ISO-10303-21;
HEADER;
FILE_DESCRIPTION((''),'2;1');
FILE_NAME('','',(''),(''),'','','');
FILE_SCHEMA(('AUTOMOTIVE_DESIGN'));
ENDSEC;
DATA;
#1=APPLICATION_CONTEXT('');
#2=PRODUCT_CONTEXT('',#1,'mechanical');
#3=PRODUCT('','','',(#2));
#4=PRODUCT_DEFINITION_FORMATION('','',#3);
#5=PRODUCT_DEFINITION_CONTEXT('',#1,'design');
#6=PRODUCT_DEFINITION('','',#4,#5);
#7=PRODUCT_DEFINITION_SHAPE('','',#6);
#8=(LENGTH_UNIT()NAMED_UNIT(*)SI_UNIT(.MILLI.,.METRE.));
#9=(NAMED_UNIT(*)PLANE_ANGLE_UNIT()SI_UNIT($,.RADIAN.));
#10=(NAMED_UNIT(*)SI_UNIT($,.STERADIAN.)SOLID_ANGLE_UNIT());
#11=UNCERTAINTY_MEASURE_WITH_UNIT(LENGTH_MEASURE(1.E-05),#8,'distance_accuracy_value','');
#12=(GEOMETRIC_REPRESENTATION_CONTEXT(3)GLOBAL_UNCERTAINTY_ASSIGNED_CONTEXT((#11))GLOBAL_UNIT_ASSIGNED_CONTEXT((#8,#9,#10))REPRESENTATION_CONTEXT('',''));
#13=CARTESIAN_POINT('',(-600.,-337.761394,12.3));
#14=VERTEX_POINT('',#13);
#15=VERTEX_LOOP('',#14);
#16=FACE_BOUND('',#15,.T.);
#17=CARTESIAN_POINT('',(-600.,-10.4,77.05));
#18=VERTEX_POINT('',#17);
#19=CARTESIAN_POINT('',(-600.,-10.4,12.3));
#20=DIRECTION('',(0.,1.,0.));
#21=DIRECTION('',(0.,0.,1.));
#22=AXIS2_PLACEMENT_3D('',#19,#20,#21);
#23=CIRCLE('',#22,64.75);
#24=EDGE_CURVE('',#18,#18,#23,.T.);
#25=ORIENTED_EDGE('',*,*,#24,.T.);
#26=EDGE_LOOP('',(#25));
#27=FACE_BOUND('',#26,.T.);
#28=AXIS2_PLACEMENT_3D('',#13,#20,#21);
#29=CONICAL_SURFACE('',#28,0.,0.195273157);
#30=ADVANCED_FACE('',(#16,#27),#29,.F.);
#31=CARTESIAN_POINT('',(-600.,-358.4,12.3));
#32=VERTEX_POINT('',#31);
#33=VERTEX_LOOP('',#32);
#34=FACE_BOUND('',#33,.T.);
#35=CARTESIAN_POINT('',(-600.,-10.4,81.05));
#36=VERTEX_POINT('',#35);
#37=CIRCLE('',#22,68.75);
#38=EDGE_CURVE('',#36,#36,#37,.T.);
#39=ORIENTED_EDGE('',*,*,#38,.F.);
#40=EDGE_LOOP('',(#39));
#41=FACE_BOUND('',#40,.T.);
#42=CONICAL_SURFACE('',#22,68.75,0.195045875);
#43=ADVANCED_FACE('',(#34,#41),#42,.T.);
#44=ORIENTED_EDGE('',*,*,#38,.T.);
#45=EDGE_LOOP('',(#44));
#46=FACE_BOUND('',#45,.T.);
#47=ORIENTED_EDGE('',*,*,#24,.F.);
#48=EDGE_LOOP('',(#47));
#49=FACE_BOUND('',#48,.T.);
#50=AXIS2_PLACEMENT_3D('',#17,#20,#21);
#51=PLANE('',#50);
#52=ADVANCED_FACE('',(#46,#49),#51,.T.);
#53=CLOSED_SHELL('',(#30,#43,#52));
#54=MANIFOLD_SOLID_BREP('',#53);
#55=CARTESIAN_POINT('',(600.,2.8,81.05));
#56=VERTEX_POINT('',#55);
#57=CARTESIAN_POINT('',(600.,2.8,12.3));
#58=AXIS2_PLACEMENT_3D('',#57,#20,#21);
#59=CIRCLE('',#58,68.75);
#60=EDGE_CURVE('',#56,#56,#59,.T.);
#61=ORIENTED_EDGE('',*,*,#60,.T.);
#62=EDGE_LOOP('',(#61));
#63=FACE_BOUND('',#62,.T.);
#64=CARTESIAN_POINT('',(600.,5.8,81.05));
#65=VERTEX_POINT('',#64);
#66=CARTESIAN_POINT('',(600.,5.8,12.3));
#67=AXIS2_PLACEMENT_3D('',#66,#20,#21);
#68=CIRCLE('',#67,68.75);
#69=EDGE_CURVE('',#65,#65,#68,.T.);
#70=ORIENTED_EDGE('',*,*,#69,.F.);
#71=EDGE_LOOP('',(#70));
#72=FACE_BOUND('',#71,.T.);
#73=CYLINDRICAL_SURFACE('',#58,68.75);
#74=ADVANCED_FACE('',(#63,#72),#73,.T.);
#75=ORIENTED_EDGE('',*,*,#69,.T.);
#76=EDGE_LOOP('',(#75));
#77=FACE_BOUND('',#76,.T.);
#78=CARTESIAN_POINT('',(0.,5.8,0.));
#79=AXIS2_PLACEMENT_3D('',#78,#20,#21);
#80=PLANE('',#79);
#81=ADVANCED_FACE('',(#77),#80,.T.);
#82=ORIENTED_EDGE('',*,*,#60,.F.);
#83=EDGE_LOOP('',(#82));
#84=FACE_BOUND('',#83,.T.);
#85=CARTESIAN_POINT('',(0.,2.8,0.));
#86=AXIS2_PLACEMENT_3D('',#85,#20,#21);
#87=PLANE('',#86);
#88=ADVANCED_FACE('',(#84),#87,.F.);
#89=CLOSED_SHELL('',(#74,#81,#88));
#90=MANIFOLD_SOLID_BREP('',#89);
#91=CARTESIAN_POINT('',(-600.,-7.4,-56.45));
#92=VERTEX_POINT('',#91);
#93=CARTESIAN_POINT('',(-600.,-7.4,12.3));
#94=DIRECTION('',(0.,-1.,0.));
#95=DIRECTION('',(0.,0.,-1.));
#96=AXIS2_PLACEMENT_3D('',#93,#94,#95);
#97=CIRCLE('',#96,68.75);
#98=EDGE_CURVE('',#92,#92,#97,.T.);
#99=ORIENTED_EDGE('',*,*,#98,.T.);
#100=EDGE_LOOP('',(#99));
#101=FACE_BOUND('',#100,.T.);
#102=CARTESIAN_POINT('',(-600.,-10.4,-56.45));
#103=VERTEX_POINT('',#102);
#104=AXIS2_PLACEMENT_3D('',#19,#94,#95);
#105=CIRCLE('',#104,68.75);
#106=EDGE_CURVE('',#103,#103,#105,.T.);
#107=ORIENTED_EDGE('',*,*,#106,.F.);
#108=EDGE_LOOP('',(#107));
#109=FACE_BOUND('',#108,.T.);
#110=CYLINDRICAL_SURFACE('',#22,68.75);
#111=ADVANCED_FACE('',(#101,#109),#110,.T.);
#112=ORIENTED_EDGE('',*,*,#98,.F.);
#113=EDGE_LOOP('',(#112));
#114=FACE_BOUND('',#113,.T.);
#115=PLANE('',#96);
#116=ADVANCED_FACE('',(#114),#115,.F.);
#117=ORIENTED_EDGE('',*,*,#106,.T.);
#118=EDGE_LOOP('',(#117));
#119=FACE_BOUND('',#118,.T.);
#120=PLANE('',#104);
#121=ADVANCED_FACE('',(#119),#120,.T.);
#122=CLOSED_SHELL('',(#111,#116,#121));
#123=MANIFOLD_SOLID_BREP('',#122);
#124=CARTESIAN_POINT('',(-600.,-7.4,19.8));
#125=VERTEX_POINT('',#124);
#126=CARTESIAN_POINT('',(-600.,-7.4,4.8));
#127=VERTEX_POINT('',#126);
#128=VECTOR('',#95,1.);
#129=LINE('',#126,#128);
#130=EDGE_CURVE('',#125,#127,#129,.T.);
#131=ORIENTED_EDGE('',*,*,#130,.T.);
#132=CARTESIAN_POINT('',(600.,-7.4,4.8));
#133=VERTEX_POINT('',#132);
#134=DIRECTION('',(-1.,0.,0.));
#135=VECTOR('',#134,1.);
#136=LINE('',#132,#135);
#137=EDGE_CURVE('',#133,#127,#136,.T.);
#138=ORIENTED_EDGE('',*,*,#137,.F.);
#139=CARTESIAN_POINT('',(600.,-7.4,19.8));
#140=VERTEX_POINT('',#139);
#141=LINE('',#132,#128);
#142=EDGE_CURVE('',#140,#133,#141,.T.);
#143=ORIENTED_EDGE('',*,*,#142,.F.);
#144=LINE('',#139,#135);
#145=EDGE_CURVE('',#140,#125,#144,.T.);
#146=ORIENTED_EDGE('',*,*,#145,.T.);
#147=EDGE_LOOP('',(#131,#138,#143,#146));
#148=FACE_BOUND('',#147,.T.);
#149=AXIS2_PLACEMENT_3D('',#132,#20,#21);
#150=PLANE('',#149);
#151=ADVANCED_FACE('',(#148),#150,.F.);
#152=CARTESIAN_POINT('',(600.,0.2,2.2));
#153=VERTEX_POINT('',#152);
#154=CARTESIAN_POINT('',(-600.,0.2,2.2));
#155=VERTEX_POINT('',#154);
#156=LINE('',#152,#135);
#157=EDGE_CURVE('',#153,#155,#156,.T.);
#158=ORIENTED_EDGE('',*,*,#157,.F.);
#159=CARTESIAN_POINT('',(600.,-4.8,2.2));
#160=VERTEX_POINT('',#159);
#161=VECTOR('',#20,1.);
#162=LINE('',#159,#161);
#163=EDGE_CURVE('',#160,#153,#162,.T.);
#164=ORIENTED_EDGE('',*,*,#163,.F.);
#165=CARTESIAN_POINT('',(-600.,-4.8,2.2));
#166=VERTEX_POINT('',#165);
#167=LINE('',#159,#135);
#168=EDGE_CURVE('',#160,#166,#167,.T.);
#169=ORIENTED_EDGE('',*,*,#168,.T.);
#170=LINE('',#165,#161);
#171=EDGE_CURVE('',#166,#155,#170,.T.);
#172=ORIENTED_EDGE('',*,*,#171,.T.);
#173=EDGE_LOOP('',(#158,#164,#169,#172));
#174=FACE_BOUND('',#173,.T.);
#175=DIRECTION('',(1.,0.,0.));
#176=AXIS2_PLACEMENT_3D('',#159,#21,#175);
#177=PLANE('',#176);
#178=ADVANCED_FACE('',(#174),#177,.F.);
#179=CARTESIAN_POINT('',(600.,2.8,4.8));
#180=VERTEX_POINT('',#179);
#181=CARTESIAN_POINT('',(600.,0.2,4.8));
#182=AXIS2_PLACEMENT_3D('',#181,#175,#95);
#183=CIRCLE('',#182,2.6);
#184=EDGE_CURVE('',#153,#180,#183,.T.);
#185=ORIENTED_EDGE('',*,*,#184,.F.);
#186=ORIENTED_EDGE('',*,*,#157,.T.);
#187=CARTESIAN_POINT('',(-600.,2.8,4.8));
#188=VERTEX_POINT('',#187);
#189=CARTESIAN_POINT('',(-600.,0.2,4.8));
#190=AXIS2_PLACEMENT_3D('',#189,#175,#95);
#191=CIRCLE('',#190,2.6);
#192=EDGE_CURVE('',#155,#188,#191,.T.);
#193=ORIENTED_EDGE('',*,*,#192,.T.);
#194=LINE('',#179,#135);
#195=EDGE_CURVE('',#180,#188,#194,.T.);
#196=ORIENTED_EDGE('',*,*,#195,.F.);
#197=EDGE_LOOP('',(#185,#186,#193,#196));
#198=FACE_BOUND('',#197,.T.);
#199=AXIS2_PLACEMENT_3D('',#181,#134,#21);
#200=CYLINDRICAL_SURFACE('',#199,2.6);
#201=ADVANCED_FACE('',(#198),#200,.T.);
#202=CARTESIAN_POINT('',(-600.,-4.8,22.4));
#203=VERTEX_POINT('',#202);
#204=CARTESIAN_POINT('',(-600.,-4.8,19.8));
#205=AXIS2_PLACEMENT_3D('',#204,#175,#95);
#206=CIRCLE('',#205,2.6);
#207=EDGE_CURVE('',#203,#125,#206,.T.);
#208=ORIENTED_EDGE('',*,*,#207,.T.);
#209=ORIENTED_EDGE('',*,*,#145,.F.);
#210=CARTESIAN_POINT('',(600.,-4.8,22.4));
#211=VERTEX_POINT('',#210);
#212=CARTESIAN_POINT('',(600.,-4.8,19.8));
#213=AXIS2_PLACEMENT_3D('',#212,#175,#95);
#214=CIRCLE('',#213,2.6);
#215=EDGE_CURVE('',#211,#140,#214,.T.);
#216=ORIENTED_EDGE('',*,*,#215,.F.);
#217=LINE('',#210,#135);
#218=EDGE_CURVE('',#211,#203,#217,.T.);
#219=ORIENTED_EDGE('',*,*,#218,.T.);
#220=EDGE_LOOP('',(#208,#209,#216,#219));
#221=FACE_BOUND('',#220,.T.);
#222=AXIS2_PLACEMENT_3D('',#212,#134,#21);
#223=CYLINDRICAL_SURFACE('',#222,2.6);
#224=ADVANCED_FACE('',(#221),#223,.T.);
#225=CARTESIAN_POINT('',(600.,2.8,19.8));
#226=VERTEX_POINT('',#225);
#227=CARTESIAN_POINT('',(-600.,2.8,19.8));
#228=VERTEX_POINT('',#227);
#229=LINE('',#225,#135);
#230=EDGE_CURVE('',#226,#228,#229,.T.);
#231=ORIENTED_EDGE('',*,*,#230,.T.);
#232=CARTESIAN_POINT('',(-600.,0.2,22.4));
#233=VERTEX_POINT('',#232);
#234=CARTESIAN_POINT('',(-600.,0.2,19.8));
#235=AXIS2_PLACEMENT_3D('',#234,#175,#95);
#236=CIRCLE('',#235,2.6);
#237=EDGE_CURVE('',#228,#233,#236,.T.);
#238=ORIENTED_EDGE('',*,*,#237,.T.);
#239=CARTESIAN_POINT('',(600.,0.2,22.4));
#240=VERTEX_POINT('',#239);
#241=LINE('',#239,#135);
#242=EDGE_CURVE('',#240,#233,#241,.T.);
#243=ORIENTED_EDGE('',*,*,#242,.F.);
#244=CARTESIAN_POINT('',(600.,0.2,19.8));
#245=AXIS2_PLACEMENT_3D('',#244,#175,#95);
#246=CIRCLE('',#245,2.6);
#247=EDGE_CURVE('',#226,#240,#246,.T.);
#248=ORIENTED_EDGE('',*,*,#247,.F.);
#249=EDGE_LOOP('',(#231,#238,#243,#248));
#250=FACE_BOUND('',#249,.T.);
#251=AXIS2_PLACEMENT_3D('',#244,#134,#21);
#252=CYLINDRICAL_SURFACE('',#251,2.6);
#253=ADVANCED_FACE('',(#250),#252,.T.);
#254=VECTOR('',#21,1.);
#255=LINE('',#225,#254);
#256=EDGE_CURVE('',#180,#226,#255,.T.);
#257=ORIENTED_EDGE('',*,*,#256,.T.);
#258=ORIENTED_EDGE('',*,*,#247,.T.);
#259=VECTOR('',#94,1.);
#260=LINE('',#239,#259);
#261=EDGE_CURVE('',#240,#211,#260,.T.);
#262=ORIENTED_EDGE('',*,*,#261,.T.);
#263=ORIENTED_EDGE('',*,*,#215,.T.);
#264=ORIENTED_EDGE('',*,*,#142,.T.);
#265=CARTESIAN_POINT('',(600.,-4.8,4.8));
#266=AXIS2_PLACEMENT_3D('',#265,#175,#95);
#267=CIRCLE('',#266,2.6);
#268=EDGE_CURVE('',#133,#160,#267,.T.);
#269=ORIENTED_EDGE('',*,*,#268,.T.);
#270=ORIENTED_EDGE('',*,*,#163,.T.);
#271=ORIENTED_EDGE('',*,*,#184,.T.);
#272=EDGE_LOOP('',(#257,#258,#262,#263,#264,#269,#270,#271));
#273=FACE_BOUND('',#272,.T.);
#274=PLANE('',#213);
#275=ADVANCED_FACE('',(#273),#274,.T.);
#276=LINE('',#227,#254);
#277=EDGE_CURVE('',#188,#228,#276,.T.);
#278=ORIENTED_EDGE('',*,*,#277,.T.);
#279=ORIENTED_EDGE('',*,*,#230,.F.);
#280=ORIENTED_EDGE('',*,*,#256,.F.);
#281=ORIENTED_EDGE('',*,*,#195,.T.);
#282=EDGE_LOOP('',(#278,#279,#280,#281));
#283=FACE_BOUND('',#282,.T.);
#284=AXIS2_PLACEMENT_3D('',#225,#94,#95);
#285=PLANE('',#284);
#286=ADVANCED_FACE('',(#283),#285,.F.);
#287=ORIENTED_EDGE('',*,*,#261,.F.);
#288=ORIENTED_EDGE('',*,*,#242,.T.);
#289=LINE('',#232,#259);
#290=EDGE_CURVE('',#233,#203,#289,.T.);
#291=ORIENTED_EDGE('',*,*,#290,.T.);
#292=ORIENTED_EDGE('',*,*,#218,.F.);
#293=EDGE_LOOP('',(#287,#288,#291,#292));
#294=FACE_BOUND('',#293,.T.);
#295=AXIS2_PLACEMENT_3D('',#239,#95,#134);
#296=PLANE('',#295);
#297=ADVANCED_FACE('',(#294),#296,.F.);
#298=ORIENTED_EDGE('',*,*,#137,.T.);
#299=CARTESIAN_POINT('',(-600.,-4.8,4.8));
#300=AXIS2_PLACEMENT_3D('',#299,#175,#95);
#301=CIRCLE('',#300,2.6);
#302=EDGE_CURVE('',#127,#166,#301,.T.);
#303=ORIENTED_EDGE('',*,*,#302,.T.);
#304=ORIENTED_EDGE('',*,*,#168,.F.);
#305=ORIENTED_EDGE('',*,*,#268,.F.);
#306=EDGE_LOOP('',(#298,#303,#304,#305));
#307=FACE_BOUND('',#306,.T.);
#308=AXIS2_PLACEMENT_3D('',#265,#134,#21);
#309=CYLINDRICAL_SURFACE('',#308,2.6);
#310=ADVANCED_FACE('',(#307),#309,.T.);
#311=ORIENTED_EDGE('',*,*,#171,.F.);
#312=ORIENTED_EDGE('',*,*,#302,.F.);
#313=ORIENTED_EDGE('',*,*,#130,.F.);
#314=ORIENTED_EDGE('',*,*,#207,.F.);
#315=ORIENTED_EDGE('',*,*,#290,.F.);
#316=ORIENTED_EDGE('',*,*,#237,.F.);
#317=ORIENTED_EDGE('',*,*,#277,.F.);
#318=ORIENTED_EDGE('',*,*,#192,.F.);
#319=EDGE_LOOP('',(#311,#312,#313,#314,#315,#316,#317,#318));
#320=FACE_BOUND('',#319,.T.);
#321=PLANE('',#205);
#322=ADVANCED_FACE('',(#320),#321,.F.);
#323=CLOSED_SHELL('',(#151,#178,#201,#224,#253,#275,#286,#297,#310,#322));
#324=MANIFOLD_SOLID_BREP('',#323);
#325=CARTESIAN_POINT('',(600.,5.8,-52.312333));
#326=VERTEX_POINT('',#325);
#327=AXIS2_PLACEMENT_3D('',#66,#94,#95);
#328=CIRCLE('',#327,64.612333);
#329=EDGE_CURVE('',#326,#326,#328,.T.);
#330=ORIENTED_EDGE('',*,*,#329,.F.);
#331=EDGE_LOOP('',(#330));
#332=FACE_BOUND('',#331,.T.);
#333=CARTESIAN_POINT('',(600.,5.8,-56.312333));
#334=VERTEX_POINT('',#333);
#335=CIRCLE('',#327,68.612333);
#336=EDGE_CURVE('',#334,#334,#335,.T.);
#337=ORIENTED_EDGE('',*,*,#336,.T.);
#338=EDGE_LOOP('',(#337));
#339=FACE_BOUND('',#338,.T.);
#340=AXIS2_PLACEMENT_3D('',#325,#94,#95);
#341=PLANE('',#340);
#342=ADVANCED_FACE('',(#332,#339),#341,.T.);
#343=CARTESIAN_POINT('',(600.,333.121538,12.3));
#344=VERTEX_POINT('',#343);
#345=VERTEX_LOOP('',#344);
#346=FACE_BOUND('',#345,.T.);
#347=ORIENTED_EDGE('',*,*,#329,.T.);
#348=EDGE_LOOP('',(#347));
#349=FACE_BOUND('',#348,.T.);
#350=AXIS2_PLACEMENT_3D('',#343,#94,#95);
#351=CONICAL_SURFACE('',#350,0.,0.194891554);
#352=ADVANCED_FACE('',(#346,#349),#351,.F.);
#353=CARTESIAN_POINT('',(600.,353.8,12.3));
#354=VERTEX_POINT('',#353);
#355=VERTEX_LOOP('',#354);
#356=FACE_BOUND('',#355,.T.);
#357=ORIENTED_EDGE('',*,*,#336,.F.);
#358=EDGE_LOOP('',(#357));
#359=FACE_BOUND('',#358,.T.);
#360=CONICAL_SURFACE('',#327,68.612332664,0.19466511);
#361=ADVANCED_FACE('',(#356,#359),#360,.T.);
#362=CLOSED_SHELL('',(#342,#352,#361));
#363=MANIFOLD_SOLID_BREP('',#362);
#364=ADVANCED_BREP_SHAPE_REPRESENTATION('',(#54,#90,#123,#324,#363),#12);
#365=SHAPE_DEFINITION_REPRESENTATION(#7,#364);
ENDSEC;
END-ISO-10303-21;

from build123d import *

# Parameters (mm, degrees)
RECTANGULAR_TUBE_50_X_30_X_2_6_1_DEPTH = 1200
BOSS_EXTRUDE1_START                    = 2.8
BOSS_EXTRUDE1_OUTLINE_R                = 68.75
BOSS_EXTRUDE1_DEPTH                    = 3
SKETCH14_R                             = 68.75
BOSS_EXTRUDE2_DEPTH                    = 3


# Read off the part's stored shape, not the designer's step: Boss-Extrude1
with BuildPart() as part:
    # Sketch12 → Rectangular tube 50 X 30 X 2.6(1) (new body)
    with BuildSketch(Plane.YZ.offset(-600)):
        with BuildLine():
            Line((-4.8, 2.2), (0.2, 2.2))
            ThreePointArc((0.2, 2.2), (2.038477631, 2.961522369), (2.8, 4.8))
            Line((2.8, 4.8), (2.8, 19.8))
            ThreePointArc((2.8, 19.8), (2.038477631, 21.638477631), (0.2, 22.4))
            Line((0.2, 22.4), (-4.8, 22.4))
            ThreePointArc((-4.8, 22.4), (-6.638477631, 21.638477631), (-7.4, 19.8))
            Line((-7.4, 19.8), (-7.4, 4.8))
            ThreePointArc((-7.4, 4.8), (-6.638477631, 2.961522369), (-4.8, 2.2))
        make_face()
    extrude(amount=RECTANGULAR_TUBE_50_X_30_X_2_6_1_DEPTH)


with BuildPart() as body_2:
    # Boss-Extrude1 outline → Boss-Extrude1 (new body)
    with BuildSketch(Plane(origin=(0, 0, 0), x_dir=(1, 0, 0), z_dir=(0, 1, 0)).offset(BOSS_EXTRUDE1_START)):
        with Locations((600, -12.3)):
            Circle(BOSS_EXTRUDE1_OUTLINE_R)
    extrude(amount=BOSS_EXTRUDE1_DEPTH)


with BuildPart() as body_3:
    # Sketch14 → Boss-Extrude2 (new body)
    with BuildSketch(Plane.XZ.offset(7.4)):
        with Locations(Location((-600, 12.3, 0), (0, 0, 270))):
            Circle(SKETCH14_R)
    extrude(amount=BOSS_EXTRUDE2_DEPTH)


with BuildPart() as body_4:
    # Sketch17 → Revolve17 (revolve)
    with BuildSketch(Plane(origin=(600, 0, 0), x_dir=(0, 0, -1), z_dir=(1, 0, 0))):
        Polygon((-12.3, 353.8), (56.312332664, 5.8), (52.312332664, 5.8), (-12.3, 333.121537742), align=None)
    revolve(axis=Axis((600, 5.8, 12.3), (0, 1, 0)))


with BuildPart() as body_5:
    # Sketch20 → Revolve23 (revolve)
    with BuildSketch(Plane(origin=(-600, 0, 0), x_dir=(0, 0, -1), z_dir=(1, 0, 0))):
        Polygon((-81.05, -10.4), (-12.3, -358.4), (-12.3, -337.761394115), (-77.05, -10.4), align=None)
    revolve(axis=Axis((-600, -10.4, 12.3), (0, -1, 0)))


solid = Compound([part.part, body_2.part, body_3.part, body_4.part, body_5.part])
